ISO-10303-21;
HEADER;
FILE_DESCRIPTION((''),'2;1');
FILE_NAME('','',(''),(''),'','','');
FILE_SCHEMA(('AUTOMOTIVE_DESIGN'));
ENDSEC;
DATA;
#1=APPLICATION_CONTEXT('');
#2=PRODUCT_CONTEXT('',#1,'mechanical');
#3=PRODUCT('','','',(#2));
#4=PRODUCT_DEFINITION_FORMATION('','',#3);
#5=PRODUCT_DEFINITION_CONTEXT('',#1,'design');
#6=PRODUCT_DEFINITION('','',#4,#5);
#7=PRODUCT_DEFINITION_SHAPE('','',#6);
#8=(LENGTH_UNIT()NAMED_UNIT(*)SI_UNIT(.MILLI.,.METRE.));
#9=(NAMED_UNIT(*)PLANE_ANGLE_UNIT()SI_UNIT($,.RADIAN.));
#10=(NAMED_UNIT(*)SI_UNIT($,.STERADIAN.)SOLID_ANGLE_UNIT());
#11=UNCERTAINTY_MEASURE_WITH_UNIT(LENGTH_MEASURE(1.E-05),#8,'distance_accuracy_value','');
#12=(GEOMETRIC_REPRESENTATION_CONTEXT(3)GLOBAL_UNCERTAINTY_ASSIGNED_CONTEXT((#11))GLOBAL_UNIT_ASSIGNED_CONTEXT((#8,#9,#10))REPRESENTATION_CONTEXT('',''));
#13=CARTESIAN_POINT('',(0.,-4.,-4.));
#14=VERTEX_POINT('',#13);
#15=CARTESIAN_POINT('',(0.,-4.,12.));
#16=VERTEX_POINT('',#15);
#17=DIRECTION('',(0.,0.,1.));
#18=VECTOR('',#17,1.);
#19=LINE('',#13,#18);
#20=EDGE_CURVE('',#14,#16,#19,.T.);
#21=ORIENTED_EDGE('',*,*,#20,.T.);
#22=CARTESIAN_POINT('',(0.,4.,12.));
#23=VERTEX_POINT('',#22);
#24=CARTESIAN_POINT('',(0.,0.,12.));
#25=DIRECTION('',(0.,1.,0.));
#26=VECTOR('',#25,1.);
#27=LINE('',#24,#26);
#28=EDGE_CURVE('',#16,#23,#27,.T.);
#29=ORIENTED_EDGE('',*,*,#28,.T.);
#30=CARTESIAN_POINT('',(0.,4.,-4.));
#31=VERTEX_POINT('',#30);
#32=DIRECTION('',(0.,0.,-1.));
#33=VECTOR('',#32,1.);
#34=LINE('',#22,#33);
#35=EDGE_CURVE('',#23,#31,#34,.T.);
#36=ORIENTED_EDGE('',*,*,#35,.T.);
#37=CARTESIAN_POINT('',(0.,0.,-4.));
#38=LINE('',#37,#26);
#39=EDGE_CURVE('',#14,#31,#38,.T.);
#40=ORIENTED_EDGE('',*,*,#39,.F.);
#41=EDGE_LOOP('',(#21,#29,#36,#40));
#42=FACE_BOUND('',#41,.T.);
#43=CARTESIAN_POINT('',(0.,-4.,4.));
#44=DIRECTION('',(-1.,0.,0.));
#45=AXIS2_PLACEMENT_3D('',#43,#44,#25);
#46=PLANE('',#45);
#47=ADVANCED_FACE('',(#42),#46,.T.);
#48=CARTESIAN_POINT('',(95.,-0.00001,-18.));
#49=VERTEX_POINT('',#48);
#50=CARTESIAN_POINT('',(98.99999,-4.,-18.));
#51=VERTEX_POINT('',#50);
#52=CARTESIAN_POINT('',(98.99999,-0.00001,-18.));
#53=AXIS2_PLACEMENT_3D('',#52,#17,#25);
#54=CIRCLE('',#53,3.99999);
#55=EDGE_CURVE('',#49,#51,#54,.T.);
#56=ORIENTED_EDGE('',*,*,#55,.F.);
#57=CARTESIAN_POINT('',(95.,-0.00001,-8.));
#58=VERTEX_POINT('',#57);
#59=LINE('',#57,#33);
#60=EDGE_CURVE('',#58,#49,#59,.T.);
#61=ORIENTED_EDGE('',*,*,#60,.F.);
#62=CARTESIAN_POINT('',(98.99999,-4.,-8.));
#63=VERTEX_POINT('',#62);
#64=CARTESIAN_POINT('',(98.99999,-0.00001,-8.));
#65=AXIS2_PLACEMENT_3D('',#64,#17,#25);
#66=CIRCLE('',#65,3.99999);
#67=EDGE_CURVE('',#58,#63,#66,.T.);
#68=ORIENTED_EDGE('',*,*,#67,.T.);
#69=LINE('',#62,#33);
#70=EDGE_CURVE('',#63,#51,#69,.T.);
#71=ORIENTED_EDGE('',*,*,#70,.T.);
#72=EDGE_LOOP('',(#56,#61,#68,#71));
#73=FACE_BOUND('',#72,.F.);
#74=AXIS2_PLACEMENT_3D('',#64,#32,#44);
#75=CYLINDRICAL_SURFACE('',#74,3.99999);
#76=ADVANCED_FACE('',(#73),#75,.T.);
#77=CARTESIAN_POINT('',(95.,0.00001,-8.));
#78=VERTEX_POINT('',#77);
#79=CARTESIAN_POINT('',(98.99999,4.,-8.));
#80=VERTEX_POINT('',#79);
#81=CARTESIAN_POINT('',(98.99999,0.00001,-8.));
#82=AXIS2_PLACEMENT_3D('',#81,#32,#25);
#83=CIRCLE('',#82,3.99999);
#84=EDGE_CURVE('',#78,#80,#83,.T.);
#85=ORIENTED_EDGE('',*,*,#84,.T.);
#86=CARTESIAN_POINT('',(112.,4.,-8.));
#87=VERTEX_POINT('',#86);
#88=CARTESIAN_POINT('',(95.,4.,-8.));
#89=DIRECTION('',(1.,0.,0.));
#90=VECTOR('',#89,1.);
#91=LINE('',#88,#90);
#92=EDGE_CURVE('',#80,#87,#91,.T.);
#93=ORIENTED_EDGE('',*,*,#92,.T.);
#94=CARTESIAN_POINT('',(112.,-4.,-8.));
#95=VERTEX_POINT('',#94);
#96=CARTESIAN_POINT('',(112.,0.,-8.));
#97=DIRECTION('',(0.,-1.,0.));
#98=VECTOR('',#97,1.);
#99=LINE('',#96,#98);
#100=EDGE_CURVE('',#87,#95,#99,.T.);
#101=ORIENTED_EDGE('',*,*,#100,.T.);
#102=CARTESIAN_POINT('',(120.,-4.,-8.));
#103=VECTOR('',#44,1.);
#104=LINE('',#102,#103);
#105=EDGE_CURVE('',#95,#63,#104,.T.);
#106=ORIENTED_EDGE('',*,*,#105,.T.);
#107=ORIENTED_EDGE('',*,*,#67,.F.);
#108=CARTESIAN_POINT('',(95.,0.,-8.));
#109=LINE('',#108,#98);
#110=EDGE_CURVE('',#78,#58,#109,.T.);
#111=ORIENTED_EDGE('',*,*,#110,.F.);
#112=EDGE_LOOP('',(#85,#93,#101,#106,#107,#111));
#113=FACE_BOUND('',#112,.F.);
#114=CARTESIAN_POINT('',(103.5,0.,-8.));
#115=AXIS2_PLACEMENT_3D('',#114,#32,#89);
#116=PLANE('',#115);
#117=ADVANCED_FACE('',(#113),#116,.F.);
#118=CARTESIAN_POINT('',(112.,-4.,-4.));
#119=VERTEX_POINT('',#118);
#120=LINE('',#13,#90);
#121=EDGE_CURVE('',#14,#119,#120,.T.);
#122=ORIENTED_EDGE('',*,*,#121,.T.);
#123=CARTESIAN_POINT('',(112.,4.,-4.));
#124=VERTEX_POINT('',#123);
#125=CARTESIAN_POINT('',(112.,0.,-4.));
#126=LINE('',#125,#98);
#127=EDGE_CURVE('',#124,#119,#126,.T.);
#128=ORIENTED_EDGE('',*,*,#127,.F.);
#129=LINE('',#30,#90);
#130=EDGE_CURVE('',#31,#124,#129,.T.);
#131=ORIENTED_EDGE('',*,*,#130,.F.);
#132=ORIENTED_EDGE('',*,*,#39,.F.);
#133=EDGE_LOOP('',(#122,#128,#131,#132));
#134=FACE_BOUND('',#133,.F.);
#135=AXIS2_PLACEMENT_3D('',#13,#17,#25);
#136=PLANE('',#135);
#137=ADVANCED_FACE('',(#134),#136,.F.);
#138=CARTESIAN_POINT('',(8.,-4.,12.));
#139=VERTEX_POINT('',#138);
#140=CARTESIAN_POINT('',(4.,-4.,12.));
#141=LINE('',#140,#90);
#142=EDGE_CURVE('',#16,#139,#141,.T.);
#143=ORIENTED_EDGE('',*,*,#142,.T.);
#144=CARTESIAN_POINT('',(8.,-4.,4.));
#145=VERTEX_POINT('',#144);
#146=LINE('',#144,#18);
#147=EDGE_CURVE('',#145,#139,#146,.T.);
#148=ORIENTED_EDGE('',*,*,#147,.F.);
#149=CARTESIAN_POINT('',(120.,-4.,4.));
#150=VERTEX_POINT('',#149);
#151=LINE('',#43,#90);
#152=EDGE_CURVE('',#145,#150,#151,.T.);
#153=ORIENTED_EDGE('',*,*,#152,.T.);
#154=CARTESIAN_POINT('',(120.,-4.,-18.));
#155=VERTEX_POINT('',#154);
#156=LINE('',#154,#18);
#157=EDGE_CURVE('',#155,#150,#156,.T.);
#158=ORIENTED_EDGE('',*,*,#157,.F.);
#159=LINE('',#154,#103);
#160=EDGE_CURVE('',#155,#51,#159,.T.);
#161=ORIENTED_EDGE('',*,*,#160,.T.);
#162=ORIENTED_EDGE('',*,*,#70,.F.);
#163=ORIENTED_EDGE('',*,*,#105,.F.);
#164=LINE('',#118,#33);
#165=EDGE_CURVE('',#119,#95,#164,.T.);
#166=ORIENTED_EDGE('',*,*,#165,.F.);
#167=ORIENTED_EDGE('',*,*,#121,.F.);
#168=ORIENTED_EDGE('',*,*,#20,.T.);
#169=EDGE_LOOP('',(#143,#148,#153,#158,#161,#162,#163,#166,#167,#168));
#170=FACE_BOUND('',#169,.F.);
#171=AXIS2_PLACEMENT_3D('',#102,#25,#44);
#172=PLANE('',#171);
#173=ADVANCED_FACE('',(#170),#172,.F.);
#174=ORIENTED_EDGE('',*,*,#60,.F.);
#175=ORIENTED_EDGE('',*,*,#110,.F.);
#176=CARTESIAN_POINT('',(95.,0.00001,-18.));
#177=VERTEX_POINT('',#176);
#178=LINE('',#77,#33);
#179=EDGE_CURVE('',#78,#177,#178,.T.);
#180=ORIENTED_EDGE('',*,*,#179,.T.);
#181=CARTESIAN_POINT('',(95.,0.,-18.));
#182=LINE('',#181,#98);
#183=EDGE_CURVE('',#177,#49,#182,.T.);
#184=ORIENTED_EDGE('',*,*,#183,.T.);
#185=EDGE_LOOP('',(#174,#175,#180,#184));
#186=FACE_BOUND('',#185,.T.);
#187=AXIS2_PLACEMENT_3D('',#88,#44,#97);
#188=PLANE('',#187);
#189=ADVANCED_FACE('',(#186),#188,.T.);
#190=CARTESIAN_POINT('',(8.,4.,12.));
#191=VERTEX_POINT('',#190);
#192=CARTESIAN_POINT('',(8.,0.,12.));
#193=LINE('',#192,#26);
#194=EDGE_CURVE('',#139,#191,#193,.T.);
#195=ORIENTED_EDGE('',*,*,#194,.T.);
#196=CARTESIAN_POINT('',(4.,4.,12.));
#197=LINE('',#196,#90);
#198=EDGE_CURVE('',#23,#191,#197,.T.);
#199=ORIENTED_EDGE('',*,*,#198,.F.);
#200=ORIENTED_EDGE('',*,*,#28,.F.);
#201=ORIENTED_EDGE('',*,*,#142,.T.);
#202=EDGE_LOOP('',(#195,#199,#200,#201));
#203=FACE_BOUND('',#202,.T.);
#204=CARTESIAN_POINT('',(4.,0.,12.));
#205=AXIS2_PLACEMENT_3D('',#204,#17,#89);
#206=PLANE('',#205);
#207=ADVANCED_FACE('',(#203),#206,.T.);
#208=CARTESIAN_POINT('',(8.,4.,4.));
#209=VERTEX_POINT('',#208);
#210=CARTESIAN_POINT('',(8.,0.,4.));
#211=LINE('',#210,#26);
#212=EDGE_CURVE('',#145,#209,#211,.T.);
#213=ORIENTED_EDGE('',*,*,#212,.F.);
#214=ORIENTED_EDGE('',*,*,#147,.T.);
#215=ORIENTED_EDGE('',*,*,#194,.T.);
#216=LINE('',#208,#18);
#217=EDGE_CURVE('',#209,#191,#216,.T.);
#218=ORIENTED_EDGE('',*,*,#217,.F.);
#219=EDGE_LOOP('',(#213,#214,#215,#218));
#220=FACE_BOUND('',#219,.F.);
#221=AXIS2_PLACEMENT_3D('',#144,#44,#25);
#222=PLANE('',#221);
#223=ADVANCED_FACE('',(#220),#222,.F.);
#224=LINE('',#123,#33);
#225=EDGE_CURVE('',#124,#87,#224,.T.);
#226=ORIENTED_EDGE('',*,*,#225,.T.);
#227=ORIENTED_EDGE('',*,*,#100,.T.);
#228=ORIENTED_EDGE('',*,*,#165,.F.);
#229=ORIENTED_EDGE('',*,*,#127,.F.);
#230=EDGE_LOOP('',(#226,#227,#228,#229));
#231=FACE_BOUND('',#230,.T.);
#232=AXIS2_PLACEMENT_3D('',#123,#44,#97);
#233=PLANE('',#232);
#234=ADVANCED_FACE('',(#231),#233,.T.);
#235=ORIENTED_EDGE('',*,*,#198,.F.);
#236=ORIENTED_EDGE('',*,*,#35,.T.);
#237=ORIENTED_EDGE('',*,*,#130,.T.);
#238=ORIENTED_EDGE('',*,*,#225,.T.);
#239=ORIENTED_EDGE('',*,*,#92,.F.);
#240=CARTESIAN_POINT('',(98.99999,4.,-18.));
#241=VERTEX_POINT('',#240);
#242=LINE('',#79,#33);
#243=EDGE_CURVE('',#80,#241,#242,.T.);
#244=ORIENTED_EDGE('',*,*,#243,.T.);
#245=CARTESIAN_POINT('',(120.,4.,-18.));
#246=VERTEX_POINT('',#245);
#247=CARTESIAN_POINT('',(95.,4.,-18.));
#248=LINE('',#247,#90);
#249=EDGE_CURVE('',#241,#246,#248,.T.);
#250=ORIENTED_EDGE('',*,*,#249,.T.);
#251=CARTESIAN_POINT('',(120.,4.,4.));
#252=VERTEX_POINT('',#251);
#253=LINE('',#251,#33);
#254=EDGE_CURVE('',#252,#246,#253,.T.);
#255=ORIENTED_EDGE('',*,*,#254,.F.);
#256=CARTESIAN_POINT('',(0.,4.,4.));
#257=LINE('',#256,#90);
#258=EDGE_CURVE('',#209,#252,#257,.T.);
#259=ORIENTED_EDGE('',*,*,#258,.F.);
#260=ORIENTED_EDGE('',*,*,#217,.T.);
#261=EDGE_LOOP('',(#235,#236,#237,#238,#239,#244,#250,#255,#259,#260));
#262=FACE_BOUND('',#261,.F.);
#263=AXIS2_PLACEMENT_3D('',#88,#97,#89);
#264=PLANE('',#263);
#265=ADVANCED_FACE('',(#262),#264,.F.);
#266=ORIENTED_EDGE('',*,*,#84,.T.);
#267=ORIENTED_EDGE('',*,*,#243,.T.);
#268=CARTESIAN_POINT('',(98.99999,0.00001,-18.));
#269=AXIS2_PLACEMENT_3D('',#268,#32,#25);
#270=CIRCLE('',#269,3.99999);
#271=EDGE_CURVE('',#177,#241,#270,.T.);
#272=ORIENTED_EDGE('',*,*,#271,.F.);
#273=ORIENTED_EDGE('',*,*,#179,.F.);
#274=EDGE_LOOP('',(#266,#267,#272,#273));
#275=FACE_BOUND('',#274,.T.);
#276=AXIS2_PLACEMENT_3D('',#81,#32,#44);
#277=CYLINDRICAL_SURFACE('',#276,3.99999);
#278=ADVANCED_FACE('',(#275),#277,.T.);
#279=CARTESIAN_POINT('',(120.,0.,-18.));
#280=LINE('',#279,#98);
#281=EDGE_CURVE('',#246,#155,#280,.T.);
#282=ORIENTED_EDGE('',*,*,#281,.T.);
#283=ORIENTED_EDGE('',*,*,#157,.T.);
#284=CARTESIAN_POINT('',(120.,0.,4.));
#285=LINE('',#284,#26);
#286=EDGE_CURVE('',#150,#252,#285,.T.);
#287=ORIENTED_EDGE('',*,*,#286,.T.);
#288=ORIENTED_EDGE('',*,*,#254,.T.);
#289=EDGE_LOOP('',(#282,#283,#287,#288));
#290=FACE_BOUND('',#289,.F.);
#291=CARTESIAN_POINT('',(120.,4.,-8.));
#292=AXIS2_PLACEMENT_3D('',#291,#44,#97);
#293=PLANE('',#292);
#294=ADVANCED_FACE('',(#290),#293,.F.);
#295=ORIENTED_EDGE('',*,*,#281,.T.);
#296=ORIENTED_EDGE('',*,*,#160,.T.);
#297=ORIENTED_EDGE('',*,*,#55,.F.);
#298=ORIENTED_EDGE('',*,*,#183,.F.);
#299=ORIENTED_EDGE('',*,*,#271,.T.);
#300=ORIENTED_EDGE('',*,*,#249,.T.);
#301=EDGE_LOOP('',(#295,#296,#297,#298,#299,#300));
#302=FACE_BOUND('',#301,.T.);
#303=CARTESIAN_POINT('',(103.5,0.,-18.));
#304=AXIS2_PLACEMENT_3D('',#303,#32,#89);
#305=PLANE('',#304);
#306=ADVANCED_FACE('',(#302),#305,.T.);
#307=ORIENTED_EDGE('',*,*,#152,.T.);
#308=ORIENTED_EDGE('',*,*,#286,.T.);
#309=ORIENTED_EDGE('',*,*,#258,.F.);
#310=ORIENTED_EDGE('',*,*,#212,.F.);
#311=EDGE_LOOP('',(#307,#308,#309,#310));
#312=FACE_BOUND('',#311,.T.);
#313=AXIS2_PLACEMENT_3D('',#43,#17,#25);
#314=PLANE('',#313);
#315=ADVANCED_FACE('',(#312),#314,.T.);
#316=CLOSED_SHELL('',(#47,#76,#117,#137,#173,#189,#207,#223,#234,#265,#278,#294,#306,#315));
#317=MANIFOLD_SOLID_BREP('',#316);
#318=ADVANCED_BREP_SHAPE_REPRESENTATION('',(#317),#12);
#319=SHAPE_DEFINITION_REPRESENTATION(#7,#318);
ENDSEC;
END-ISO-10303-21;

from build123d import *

# Parameters (mm, degrees)
F0_W     = 8
F0_H     = 8
F1_DEPTH = 120
F2_W     = 8
F2_H     = 8
F3_DEPTH = 8
F4_W     = 8
F4_H     = 8
F5_DEPTH = 4
F6_W     = 17
F6_H     = 8
F6_W_2   = 8
F7_DEPTH = 10
F8_R     = 3.99999


# Not quite as in the source:
# - a fillet or chamfer is up to 0.001 mm smaller than in the source, because OpenCascade refuses the exact size


with BuildPart() as f1:
    # F0 (on Right) → F1 (new body)
    with BuildSketch(Plane.YZ):
        Rectangle(F0_W, F0_H)
    extrude(amount=F1_DEPTH)

    # F2 (on face) → F3 (join)
    with BuildSketch(Plane.XY.offset(4)):
        with Locations((4, 0)):
            Rectangle(F2_W, F2_H)
    extrude(amount=F3_DEPTH)

    # F4 (on face) → F5 (join)
    with BuildSketch(Plane(origin=(0, 0, -4), x_dir=(1, 0, 0), z_dir=(0, 0, -1))):
        with Locations((116, 0)):
            Rectangle(F4_W, F4_H)
    extrude(amount=F5_DEPTH)

    # F6 (on face) → F7 (join)
    with BuildSketch(Plane(origin=(0, 0, -8), x_dir=(1, 0, 0), z_dir=(0, 0, -1))):
        with Locations((103.5, 0)):
            Rectangle(F6_W, F6_H)
        with Locations((116, 0)):
            Rectangle(F6_W_2, F6_H)
    extrude(amount=F7_DEPTH)

    # F8 (radius 4 in the source; OpenCascade refuses exactly that, so slightly less here)
    f8_edges = [f1.edges().sort_by_distance(p)[0] for p in [
        (95, -4, -13),
        (95, 4, -13),
    ]]
    fillet(f8_edges, radius=F8_R)


solid = f1.part
